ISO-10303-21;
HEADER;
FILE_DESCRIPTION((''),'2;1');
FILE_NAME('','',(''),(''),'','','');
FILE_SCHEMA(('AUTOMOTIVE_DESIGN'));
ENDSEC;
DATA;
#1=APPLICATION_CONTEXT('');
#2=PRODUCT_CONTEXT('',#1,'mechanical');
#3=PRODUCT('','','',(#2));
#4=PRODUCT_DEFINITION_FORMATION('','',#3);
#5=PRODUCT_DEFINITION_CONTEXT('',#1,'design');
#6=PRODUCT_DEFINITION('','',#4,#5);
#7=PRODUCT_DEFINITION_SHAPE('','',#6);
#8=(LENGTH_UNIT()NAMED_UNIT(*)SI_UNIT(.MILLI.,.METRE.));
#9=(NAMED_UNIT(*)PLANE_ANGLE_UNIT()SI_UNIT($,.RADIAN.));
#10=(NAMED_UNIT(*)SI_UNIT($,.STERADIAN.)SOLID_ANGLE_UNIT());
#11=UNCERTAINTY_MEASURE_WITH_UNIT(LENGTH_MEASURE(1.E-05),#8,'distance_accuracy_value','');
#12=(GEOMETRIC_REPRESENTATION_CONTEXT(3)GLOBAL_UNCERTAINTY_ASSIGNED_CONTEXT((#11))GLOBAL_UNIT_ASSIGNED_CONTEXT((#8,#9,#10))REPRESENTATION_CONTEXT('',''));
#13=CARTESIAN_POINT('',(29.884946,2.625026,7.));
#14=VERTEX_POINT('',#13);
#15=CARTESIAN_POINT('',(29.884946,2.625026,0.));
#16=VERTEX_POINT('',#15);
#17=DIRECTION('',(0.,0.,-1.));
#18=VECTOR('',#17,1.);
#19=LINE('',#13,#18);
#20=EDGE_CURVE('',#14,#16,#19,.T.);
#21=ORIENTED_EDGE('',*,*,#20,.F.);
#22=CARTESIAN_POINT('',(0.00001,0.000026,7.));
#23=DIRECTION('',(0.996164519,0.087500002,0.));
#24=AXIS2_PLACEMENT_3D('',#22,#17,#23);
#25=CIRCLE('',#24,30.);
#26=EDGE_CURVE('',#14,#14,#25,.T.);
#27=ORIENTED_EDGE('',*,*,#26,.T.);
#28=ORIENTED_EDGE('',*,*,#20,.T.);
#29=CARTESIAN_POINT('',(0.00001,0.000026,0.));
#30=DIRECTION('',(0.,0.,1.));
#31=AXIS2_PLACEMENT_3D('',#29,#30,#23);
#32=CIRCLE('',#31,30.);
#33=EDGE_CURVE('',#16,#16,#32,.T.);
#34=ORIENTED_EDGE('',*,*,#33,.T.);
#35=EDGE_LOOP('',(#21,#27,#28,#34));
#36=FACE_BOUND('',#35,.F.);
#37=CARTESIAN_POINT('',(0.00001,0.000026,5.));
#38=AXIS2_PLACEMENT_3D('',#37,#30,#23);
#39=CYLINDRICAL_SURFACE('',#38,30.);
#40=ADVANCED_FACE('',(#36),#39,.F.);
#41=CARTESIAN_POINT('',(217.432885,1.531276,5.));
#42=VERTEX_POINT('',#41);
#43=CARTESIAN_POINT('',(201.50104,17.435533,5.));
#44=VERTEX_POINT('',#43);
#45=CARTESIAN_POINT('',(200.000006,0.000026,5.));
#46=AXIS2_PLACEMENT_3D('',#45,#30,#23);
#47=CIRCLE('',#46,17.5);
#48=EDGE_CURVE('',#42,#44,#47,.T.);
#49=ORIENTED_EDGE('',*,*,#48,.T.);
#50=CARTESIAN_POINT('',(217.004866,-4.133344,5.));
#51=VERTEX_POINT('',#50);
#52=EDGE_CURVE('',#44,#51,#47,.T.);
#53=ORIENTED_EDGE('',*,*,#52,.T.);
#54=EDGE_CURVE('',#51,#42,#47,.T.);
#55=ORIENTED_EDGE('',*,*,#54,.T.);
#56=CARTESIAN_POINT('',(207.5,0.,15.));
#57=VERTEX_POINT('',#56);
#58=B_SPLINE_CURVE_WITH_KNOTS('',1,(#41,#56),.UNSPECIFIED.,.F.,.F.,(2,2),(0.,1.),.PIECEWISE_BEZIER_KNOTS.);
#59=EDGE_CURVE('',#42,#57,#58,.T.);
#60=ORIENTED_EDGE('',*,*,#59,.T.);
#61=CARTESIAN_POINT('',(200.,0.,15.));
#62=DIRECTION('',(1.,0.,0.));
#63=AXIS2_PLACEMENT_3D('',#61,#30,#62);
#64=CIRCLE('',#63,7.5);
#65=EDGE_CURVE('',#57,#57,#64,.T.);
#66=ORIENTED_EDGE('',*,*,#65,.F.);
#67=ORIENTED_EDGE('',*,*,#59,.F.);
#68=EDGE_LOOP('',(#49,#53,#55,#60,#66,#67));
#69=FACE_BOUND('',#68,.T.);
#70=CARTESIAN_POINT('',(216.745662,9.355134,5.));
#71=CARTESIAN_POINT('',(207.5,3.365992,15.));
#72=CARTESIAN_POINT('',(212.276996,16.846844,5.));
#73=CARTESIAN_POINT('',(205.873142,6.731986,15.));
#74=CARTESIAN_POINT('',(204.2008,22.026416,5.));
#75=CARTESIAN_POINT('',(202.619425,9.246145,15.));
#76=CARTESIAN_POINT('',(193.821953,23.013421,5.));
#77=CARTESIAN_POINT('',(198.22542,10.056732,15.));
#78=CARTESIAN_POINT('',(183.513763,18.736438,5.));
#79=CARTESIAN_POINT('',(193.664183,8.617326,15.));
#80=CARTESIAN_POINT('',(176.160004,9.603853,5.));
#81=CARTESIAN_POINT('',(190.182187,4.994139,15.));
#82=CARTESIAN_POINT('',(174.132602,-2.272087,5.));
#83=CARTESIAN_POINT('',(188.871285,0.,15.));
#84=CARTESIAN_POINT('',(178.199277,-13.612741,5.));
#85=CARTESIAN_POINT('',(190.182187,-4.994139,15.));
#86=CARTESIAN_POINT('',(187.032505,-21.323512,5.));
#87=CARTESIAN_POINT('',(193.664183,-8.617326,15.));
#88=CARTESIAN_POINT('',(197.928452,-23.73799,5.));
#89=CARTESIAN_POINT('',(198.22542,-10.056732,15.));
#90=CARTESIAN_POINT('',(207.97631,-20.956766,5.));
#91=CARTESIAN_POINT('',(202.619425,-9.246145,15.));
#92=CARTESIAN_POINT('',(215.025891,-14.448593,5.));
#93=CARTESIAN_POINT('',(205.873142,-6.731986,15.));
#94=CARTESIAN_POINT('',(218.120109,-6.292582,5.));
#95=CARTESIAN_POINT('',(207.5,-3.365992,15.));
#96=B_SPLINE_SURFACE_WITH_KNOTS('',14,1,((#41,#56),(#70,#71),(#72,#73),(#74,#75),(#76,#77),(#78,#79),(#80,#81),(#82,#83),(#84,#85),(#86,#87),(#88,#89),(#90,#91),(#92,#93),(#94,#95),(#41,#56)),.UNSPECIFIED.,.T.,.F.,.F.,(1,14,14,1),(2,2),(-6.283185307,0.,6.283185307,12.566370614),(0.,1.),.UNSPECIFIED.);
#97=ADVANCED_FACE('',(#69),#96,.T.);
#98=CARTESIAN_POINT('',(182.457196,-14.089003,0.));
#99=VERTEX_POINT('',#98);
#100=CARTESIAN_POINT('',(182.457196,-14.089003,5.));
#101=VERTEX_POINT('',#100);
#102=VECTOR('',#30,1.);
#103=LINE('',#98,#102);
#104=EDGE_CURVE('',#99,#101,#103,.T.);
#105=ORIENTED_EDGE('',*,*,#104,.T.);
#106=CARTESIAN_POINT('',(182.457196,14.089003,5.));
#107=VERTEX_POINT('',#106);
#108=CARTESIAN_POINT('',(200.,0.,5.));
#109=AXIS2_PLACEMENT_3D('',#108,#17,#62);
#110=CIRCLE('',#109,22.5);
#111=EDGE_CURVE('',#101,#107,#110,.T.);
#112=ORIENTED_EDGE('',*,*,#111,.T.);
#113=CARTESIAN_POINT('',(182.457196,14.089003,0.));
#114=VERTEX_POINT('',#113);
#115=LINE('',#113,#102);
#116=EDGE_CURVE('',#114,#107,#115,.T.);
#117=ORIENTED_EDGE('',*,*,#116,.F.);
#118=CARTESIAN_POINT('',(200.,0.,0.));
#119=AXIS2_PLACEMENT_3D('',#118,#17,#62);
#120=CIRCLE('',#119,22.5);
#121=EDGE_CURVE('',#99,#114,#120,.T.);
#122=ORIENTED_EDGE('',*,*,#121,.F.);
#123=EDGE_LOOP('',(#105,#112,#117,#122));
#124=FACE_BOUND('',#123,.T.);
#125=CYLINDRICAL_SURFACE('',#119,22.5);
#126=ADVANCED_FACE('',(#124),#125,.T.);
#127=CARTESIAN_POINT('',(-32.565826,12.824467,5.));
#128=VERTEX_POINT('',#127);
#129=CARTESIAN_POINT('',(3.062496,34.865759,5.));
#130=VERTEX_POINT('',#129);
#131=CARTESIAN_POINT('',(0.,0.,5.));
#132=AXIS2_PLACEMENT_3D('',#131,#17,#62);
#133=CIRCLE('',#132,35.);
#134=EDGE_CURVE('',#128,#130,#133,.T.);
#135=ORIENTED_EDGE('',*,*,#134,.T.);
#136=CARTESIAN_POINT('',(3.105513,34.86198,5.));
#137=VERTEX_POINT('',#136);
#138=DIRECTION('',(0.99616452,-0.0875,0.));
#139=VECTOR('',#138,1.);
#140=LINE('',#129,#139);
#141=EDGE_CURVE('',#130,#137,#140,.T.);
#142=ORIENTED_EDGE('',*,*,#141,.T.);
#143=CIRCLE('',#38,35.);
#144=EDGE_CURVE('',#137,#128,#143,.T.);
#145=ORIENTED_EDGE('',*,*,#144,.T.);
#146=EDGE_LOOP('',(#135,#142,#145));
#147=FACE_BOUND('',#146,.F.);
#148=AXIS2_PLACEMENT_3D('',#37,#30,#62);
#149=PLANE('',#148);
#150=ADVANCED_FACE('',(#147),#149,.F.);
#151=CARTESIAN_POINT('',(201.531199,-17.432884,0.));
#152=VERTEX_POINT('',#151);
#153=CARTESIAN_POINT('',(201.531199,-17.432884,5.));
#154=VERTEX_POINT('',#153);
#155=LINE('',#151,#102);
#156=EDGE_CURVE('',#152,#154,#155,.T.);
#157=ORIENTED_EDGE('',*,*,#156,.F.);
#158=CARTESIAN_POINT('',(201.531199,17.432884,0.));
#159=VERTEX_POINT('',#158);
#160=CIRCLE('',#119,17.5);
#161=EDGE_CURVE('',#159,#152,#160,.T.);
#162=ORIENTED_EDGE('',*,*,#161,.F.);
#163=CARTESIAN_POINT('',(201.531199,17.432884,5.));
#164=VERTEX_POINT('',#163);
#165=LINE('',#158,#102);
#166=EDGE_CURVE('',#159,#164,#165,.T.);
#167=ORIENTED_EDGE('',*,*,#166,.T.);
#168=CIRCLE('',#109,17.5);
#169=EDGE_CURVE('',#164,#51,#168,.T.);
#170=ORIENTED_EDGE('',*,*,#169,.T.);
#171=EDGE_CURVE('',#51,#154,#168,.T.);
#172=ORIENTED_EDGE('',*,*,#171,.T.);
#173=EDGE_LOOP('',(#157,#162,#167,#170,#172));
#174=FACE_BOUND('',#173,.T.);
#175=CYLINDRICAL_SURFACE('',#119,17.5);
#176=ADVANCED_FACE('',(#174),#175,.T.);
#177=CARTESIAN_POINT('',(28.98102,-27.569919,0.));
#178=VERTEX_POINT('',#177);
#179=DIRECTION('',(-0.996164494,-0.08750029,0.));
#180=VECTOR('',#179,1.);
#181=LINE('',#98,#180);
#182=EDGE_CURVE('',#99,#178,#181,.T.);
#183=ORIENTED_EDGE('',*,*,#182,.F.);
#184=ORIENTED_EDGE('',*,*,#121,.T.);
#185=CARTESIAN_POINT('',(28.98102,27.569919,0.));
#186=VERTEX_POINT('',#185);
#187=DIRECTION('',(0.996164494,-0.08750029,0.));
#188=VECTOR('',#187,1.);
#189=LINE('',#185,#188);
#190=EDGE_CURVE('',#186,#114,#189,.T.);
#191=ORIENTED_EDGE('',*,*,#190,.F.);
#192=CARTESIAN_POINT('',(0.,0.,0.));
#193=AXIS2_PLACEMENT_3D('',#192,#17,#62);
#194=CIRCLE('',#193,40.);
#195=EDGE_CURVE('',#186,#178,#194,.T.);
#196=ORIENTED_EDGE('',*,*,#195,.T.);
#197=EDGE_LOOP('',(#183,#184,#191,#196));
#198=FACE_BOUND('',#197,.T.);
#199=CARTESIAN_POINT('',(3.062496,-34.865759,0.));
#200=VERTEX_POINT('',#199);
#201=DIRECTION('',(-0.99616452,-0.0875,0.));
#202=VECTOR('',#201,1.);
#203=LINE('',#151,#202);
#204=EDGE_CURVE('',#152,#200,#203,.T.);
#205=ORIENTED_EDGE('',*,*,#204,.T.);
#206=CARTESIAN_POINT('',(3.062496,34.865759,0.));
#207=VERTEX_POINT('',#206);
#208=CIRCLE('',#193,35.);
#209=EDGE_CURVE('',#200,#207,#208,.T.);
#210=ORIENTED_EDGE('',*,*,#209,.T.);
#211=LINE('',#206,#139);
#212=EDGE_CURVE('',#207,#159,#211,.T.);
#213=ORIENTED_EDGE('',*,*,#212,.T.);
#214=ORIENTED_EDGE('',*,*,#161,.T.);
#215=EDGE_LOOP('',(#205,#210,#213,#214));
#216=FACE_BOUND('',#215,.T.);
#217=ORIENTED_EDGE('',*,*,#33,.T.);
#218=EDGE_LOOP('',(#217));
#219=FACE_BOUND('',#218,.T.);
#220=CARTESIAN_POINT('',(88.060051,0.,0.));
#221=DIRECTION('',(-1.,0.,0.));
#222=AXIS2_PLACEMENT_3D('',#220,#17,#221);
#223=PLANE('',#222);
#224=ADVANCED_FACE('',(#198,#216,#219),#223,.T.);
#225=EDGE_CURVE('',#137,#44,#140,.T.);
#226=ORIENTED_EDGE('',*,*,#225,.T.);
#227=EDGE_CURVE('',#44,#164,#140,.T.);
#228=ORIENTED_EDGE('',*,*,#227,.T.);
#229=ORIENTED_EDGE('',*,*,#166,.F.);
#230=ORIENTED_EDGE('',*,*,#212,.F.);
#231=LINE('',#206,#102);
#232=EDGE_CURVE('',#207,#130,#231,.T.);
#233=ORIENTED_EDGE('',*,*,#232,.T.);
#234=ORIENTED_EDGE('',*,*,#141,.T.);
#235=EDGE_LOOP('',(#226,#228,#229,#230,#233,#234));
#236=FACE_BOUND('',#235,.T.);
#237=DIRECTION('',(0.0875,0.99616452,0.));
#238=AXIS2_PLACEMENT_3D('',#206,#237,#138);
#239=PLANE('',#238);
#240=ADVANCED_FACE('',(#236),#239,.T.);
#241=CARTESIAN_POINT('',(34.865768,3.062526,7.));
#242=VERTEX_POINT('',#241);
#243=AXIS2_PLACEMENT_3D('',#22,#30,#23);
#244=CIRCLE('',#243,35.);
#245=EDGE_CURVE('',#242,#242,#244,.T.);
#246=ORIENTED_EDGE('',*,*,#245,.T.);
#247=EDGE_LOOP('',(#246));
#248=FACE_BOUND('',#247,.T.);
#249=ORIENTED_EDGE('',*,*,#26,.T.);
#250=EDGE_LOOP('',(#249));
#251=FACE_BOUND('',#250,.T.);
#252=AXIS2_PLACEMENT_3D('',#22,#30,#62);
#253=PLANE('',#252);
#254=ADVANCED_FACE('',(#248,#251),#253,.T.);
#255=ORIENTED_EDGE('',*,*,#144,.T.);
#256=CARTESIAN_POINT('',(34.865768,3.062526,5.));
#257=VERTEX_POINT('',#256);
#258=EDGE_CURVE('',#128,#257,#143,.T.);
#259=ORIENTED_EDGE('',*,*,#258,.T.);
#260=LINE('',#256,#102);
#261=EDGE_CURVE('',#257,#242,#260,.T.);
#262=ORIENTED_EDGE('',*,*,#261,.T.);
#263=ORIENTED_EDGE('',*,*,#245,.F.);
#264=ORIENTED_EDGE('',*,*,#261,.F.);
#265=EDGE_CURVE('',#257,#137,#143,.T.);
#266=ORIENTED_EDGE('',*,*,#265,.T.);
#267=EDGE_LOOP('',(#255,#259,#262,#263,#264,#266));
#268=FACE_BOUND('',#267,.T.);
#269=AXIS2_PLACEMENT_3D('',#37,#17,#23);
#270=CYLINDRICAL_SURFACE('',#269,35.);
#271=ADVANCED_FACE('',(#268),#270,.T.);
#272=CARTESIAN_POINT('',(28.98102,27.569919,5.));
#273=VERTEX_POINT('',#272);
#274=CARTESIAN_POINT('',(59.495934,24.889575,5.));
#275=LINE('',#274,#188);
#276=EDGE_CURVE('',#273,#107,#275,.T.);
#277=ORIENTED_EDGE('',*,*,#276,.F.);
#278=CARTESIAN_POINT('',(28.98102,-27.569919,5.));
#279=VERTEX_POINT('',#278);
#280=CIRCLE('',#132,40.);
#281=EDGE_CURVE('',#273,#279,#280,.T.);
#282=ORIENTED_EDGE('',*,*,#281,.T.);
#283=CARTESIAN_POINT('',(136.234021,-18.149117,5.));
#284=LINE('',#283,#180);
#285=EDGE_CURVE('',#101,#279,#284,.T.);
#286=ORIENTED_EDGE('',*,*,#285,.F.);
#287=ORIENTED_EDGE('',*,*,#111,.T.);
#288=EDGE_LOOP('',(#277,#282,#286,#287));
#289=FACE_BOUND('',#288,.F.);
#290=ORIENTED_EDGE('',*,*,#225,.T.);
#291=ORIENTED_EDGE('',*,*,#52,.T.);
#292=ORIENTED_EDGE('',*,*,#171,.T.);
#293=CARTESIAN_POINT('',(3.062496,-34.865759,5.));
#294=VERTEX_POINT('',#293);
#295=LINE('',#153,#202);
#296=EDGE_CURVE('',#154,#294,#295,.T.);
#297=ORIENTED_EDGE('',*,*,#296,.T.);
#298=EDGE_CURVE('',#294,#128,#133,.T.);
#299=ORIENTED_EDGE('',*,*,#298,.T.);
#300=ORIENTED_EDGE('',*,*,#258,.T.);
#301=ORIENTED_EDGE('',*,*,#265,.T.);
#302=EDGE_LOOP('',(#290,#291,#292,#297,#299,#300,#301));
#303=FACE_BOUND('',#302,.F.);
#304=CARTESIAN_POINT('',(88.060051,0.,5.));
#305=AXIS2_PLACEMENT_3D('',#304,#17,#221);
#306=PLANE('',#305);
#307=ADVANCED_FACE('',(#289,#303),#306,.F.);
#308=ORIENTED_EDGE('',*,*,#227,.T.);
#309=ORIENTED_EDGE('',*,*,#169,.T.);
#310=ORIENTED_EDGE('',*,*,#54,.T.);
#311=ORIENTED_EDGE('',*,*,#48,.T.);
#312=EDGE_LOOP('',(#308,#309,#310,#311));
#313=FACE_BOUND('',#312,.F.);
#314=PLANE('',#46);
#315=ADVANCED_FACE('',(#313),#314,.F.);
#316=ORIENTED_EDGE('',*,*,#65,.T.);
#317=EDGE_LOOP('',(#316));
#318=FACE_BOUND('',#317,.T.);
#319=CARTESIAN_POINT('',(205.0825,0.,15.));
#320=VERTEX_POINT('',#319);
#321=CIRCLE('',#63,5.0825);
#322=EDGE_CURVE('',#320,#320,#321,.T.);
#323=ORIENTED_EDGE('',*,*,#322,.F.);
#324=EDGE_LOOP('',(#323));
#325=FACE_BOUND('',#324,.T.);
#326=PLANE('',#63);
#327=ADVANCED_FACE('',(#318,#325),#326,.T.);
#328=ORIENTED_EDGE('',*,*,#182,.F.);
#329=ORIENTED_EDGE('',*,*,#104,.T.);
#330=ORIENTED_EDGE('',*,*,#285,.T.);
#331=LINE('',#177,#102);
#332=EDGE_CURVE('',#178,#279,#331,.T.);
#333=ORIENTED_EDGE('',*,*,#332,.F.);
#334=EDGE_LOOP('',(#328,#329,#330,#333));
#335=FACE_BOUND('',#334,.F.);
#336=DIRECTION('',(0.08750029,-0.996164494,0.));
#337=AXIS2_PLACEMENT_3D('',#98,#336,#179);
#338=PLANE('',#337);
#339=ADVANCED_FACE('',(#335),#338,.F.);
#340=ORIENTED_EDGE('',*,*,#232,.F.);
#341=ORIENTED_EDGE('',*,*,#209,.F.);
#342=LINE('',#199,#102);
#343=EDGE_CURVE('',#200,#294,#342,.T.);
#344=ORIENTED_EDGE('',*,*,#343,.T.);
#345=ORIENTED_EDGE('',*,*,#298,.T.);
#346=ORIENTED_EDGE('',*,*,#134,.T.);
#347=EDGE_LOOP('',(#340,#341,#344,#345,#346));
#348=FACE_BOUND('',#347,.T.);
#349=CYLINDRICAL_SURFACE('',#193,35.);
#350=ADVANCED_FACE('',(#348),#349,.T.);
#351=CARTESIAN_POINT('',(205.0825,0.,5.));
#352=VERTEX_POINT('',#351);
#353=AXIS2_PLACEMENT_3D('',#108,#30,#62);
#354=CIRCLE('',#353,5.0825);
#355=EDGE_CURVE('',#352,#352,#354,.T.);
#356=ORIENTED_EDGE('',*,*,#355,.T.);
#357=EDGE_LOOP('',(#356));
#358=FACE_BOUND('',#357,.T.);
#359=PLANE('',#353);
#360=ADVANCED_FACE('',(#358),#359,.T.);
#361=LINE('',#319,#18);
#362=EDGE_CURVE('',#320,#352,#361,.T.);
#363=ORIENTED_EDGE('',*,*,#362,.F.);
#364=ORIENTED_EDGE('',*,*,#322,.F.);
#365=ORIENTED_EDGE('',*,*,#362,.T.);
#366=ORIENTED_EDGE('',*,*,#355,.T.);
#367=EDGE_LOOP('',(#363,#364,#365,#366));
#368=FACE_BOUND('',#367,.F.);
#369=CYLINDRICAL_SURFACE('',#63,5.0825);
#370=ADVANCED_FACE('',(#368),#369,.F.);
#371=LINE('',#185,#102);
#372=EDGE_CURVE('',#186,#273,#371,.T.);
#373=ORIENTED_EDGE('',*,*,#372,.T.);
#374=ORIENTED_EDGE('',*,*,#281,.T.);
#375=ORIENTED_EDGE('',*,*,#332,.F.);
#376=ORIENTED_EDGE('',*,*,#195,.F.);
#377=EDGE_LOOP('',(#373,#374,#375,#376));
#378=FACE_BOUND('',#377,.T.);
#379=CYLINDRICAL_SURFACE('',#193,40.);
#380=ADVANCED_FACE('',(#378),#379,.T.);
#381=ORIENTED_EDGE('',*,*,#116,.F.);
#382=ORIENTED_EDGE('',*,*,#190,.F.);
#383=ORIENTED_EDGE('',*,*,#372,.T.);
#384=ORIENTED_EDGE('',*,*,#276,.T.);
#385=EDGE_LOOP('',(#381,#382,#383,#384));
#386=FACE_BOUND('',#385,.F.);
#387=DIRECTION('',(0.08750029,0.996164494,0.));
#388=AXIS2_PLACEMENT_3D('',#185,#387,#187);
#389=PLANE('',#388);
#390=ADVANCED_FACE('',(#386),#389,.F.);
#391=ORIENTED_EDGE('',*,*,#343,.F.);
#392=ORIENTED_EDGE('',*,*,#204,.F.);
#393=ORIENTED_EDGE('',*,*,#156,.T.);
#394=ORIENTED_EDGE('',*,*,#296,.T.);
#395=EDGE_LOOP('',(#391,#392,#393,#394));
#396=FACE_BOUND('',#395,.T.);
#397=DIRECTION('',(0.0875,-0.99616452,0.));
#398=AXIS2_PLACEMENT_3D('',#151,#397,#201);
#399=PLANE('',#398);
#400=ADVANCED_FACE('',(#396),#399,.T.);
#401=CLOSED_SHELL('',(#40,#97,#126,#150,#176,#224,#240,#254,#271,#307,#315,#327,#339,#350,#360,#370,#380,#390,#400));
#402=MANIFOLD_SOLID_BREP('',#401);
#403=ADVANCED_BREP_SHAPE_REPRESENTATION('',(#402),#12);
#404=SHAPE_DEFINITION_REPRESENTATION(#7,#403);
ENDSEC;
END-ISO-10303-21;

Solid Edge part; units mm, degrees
sketch "Sketch1" plane through (0, 0, 0) normal (0, 0, 1) x (1, 0, 0)
  line L0 (201.5312, -17.4329) -> (3.0625, -34.8658)
  line L1 (3.0625, 34.8658) -> (201.5312, 17.4329)
  arc A0 (3.0625, -34.8658) -> (3.0625, 34.8658) centre (0, 0) cw
  arc A1 (201.5312, 17.4329) -> (201.5312, -17.4329) centre (200, 0) cw
extrude "Protrusion1" add sketch "Sketch1" along normal blind 5
sketch "Sketch2" plane through (91.25, 0, 5) normal (0, 0, 1) x (0.9961645, 0.0875, 0)
  circle A0 centre (-90.9, 7.9844) radius 35
extrude "ExtrudedProtrusion_2" add sketch "Sketch2" along normal blind 2
sketch "Sketch3" plane through (91.25, 0, 5) normal (0, 0, 1) x (0.9961645, 0.0875, 0)
  circle A0 centre (-90.9, 7.9844) radius 30
extrude "ExtrudedCutout_1" cut sketch "Sketch3" along normal mid plane 68.6664
sketch "Sketch4" plane through (91.25, 0, 5) normal (0, 0, 1) x (0.9961645, 0.0875, 0)
  circle A0 centre (108.3329, -9.5156) radius 17.5
sketch "Sketch5" plane through (0, 0, 15) normal (0, 0, 1) x (1, 0, 0)
  circle A0 centre (200, 0) radius 7.5
loft "LoftedProtrusion1" add profiles "Sketch4", "Sketch5"
sketch "Sketch6" plane through (0, 0, 0) normal (0, 0, 1) x (1, 0, 0)
  line L0 (28.981, 27.5699) -> (182.4572, 14.089)
  line L1 (182.4572, -14.089) -> (28.981, -27.5699)
  arc A0 (182.4572, -14.089) -> (182.4572, 14.089) centre (200, 0) cw
  arc A1 (28.981, 27.5699) -> (28.981, -27.5699) centre (0, 0) cw
extrude "ExtrudedCutout_4" cut sketch "Sketch6" along normal blind 65.4531
sketch "Sketch7" plane through (0, 0, 15) normal (0, 0, 1) x (1, 0, 0)
  circle A0 centre (200, 0) radius 5.0825
extrude "ExtrudedCutout_5" cut sketch "Sketch7" against normal blind 10
